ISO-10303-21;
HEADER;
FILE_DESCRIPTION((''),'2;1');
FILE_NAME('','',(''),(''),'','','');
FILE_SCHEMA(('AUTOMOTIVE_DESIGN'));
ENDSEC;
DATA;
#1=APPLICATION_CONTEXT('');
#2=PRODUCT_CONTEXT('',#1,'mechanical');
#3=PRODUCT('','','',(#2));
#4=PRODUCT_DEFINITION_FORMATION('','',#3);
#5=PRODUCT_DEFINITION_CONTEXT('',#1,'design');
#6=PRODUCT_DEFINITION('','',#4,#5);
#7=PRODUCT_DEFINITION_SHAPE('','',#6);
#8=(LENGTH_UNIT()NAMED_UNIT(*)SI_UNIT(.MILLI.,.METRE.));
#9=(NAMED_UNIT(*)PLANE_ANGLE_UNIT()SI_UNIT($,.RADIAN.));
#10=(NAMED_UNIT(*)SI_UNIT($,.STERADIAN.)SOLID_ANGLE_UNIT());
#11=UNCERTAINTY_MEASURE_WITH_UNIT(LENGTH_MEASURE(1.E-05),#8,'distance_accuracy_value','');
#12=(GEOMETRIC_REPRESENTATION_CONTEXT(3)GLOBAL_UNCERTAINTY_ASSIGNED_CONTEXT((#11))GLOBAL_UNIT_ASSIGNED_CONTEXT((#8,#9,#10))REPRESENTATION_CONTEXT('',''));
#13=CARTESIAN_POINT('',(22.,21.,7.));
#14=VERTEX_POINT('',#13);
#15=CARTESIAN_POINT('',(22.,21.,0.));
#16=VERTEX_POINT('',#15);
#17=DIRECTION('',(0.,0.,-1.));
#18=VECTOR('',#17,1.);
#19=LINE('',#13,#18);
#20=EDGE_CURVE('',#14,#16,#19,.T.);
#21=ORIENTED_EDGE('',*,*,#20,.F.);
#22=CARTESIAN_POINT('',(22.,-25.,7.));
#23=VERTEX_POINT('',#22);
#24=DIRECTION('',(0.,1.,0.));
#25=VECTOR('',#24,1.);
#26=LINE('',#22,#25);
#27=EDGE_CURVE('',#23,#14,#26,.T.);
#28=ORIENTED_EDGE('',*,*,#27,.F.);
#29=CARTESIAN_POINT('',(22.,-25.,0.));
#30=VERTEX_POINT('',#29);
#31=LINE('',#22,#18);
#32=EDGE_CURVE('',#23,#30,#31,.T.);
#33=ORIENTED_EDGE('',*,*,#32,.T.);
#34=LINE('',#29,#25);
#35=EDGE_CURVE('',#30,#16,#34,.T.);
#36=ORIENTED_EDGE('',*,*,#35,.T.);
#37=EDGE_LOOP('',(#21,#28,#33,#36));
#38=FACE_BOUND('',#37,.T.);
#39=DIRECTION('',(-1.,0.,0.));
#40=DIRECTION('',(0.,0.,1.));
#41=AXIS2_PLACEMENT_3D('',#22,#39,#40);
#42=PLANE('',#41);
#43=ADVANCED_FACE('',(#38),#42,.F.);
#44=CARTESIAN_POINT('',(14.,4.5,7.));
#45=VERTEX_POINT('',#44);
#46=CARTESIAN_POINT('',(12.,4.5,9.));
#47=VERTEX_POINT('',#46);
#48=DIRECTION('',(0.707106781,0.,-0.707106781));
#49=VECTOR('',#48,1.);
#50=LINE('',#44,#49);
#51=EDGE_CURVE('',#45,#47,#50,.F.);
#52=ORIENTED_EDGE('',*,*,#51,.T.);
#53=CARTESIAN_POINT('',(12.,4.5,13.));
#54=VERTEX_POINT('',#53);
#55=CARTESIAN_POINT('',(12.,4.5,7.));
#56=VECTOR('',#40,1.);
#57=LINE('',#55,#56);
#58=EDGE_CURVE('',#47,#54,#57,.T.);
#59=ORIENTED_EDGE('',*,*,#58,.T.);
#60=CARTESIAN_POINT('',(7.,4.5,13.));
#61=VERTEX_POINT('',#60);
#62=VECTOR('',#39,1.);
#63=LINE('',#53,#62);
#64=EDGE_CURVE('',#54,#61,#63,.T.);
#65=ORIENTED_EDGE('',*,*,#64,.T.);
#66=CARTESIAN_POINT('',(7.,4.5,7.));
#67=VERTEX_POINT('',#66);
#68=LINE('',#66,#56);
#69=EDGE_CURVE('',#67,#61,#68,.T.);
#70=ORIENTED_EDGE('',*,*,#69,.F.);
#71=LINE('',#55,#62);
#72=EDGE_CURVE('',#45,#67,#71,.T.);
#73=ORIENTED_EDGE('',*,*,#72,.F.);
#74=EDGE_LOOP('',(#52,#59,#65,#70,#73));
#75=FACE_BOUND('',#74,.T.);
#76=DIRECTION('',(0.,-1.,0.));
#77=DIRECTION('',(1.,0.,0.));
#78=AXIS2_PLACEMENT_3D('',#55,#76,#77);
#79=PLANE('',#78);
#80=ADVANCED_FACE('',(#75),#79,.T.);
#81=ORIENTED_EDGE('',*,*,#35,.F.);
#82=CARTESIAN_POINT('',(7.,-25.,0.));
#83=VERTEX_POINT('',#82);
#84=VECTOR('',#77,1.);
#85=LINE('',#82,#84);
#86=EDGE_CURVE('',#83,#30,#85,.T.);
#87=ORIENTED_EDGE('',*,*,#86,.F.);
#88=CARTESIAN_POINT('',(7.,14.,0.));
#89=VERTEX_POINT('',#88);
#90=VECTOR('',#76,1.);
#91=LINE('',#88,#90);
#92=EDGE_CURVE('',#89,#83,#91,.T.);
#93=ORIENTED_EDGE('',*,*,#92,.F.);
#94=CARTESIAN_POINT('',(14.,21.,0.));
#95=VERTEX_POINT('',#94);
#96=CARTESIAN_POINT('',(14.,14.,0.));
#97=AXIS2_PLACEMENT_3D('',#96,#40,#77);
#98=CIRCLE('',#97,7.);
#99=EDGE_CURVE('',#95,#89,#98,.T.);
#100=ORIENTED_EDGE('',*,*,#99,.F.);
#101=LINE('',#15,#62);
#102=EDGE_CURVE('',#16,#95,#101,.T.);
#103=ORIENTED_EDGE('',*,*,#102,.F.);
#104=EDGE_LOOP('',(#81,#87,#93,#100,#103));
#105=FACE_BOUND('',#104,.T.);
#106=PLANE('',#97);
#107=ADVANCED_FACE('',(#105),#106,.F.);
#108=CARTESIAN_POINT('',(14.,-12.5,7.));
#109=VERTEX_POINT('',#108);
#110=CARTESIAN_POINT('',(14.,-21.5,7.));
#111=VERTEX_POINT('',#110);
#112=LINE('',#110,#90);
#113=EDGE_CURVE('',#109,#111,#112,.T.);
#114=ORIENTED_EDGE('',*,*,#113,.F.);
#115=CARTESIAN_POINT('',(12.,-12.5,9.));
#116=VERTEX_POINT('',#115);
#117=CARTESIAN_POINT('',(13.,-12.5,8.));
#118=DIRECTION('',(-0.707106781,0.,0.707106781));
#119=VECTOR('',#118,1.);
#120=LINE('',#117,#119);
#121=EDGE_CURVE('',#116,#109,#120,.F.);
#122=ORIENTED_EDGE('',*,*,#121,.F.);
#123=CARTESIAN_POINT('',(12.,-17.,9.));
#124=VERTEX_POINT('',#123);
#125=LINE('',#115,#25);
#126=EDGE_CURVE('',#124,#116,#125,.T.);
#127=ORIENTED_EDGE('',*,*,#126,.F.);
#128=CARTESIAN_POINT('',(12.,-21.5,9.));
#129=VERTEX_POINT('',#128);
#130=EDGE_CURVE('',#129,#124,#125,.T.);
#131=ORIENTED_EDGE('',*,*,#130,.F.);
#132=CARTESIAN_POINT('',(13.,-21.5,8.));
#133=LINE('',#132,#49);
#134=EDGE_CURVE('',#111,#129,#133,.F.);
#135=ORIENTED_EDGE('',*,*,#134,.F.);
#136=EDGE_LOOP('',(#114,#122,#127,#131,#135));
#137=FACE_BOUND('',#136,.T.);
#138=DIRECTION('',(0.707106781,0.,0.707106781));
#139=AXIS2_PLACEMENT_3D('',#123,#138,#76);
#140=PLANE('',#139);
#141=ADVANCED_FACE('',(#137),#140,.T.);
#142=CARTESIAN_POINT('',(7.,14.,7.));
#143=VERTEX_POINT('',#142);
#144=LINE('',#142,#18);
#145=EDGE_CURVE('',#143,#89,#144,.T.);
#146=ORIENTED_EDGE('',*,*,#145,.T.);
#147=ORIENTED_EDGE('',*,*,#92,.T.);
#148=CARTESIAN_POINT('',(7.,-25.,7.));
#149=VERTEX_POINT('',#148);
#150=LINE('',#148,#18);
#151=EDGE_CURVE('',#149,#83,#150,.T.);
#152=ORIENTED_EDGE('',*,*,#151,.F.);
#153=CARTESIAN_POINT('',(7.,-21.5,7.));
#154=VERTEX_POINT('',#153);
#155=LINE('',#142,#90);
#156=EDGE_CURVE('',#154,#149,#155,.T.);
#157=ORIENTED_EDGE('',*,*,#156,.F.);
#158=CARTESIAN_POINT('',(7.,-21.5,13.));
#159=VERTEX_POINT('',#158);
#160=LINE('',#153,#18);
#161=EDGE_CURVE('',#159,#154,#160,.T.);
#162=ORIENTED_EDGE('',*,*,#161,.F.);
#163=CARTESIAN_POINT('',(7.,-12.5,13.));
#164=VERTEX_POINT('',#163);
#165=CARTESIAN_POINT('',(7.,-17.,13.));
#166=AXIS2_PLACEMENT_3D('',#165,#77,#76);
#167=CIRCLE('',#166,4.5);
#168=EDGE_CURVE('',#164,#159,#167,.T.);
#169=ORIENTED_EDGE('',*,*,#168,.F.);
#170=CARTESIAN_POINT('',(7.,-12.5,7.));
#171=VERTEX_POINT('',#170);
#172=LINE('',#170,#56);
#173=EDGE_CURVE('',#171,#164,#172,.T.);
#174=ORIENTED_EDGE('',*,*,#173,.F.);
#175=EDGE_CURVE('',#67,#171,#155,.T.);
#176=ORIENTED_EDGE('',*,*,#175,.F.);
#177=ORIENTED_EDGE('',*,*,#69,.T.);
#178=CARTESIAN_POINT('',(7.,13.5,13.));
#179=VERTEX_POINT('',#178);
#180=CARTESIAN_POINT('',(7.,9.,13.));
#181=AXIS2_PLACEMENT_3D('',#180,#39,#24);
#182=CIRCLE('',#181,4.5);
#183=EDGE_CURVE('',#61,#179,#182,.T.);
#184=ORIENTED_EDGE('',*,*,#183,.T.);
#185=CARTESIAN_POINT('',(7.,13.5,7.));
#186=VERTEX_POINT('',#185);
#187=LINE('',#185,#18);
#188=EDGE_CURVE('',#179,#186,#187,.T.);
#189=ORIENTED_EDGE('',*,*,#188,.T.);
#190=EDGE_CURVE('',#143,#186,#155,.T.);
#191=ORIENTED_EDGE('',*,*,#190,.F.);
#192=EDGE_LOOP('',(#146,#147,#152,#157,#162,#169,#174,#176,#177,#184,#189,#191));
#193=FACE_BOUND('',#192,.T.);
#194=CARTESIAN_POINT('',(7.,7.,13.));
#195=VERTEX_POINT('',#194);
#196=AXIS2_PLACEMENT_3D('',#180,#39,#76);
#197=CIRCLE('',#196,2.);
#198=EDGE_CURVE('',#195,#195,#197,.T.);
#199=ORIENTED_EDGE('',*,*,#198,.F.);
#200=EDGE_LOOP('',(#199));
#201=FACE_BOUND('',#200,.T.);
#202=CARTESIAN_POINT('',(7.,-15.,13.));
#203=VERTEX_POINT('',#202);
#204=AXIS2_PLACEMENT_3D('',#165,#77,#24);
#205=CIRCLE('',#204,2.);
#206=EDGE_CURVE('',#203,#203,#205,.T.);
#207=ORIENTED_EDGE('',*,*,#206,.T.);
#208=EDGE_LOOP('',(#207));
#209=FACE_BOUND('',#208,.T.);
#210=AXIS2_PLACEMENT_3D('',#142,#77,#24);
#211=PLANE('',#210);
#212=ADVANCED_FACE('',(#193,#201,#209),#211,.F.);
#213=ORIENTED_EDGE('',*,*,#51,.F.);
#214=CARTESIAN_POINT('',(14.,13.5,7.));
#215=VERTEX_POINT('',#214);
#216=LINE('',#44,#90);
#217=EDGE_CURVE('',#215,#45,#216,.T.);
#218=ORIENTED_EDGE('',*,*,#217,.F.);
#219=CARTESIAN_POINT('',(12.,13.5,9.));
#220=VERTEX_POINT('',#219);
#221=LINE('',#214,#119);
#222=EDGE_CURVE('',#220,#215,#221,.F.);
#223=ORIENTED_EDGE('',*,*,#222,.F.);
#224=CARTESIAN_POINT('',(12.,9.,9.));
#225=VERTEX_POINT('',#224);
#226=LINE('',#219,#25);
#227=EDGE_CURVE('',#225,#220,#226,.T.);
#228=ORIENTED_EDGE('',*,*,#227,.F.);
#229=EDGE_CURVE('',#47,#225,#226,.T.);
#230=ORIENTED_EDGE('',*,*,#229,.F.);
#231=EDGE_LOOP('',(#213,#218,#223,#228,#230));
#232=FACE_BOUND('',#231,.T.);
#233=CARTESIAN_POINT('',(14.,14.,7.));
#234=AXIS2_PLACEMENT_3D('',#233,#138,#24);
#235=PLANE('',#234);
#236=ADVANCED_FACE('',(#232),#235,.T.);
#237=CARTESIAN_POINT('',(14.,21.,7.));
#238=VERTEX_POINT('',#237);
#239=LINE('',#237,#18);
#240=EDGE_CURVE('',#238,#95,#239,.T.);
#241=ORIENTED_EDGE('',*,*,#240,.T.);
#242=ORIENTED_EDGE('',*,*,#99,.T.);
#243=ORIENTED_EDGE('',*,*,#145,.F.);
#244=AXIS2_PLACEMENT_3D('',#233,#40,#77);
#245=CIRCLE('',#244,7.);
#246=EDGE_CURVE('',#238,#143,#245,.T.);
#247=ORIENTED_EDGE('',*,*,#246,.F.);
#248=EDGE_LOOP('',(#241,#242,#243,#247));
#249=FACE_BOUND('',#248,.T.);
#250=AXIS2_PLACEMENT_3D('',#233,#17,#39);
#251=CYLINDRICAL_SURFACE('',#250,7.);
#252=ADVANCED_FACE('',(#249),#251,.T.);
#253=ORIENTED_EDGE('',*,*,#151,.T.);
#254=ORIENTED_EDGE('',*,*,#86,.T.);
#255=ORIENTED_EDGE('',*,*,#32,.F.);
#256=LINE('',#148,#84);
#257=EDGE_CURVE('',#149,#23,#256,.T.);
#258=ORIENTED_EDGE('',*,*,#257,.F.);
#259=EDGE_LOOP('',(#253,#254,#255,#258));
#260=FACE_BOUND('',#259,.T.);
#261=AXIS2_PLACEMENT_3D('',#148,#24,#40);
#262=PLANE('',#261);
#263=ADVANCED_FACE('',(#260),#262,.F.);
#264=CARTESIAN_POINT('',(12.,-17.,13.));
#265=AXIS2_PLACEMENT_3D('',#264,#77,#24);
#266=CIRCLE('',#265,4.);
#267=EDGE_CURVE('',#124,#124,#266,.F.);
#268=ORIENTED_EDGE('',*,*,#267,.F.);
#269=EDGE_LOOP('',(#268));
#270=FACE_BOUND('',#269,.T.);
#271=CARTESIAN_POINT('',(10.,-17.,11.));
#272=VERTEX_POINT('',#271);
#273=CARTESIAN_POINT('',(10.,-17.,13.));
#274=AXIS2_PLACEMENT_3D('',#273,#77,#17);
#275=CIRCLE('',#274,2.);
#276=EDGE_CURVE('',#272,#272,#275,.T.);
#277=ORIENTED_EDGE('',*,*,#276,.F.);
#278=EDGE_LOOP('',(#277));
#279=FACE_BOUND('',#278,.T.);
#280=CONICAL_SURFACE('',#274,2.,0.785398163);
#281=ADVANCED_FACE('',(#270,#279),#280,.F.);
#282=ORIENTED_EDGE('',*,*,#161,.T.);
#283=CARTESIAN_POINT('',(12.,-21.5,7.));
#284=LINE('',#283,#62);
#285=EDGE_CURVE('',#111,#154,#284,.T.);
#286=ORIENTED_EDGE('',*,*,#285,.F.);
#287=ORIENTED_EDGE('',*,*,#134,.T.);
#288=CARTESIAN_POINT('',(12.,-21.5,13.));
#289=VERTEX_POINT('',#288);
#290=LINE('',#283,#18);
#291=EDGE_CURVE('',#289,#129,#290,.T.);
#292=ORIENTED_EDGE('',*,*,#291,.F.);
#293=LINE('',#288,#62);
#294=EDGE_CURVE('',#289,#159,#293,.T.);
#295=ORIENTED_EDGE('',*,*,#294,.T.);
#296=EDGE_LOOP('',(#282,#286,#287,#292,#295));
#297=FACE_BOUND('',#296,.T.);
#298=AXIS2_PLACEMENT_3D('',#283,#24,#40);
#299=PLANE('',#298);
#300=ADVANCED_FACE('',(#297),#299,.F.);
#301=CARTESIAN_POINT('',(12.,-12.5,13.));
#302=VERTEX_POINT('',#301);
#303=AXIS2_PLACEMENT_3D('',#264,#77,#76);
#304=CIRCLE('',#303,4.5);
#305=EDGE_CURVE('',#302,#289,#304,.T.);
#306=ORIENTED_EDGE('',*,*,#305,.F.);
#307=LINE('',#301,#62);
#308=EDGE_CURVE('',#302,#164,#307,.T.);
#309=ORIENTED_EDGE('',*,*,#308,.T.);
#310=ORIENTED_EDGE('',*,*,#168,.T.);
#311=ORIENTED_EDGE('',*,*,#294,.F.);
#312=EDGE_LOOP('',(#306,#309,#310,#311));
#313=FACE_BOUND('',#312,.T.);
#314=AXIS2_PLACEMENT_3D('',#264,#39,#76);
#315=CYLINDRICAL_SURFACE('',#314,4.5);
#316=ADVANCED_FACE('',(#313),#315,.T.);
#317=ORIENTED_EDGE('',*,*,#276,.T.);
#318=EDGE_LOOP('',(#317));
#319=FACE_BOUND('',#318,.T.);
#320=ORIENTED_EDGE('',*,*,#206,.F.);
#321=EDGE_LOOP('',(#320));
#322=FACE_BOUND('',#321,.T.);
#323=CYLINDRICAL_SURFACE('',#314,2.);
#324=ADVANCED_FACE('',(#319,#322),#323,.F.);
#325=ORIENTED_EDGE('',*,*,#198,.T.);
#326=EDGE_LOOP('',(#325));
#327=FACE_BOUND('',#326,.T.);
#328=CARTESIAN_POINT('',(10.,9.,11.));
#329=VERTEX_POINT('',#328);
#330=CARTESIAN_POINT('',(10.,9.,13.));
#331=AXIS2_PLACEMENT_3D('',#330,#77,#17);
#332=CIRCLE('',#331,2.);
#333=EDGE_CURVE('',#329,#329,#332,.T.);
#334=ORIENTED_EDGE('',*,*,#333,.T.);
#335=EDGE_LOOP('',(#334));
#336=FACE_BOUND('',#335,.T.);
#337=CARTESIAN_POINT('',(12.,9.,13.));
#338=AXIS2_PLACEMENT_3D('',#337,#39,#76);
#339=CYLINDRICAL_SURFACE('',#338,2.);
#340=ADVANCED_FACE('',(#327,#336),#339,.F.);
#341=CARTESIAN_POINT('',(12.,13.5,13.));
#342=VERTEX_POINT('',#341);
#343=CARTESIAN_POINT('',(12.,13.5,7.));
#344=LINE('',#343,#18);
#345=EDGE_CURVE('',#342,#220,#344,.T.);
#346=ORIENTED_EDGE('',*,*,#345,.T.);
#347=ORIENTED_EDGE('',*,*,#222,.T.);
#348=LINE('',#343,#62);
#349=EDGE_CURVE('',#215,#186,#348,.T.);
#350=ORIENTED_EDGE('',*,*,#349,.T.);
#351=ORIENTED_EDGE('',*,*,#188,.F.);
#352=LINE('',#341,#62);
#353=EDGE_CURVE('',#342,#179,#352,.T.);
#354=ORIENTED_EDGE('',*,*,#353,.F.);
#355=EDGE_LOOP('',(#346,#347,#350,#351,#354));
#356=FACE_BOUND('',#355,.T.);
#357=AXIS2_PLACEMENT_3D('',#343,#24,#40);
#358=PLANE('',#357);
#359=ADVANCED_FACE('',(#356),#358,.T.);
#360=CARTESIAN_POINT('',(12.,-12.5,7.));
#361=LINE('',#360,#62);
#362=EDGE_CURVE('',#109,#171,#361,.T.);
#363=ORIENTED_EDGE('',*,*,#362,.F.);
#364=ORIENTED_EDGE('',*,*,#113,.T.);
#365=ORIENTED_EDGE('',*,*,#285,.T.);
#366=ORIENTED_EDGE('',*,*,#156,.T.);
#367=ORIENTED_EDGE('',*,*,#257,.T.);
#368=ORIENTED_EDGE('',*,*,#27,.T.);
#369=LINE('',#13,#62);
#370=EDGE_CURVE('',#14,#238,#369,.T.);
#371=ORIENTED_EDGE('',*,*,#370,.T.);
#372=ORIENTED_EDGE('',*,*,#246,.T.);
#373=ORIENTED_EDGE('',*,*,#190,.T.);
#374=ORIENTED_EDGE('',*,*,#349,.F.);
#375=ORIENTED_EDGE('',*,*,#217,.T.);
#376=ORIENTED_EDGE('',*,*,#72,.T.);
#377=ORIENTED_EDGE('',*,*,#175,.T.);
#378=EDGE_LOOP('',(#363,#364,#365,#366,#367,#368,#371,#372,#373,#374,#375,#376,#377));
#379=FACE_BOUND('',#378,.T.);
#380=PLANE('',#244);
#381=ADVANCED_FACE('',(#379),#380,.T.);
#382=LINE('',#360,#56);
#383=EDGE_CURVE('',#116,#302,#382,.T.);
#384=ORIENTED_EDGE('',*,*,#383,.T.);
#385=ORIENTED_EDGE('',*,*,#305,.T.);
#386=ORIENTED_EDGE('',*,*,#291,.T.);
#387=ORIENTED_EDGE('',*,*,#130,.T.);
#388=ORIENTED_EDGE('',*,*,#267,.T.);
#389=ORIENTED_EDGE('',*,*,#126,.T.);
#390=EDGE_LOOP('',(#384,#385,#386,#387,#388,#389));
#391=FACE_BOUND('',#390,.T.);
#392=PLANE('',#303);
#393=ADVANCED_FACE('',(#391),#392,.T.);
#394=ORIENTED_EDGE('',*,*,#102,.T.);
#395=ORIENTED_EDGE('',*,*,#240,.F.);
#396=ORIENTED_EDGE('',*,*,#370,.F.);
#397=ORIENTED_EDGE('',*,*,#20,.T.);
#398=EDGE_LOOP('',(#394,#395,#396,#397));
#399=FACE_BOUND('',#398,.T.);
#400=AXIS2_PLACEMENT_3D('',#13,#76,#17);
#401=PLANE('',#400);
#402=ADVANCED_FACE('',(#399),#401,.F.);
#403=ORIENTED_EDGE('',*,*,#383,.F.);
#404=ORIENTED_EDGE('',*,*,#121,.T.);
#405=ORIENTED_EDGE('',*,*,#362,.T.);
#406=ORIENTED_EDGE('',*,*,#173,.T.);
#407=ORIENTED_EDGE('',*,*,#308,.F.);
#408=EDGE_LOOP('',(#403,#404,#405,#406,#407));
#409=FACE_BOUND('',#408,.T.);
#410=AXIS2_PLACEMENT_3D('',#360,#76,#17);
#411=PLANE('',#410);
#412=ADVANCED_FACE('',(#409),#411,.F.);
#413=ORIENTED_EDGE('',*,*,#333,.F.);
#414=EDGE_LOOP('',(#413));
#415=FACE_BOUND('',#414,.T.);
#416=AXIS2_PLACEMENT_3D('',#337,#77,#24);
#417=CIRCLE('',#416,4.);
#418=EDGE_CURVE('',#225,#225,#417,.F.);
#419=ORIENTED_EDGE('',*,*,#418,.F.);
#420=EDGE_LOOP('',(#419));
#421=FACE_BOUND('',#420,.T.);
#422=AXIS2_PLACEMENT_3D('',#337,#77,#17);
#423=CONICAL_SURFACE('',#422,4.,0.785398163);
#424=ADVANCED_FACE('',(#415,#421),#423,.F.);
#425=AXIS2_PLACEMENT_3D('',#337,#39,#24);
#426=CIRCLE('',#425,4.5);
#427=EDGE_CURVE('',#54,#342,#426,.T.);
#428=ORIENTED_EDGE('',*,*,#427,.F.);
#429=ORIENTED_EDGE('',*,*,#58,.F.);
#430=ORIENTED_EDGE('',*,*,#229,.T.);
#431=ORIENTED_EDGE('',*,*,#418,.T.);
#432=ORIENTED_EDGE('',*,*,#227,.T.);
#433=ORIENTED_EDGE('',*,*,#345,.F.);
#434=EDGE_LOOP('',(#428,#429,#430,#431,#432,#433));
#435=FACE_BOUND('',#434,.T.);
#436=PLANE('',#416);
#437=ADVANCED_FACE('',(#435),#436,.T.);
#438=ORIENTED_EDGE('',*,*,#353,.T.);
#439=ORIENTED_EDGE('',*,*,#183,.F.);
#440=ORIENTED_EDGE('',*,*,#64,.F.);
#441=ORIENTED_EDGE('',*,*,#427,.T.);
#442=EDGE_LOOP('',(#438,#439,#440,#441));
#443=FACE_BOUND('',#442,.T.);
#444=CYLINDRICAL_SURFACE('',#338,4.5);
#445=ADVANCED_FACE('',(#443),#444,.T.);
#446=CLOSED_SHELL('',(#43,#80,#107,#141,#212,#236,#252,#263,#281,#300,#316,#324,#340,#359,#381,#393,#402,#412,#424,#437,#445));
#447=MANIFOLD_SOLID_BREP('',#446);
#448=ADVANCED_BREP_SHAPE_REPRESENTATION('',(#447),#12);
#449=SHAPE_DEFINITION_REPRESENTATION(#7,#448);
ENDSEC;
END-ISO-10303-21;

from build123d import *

# Parameters (mm, degrees)
BOSS_EXTRUDE1_DEPTH = 7
SKETCH2_R           = 2
BOSS_EXTRUDE2_DEPTH = 5
CHAMFER1_SIZE       = 2
CHAMFER2_SIZE       = 2


with BuildPart() as part:
    # Sketch1 → Boss-Extrude1 (new body)
    with BuildSketch(Plane.XY):
        with BuildLine():
            Line((22, 21), (14, 21))
            ThreePointArc((14, 21), (9.050252532, 18.949747468), (7, 14))
            Line((7, 14), (7, -25))
            Line((7, -25), (22, -25))
            Line((22, -25), (22, 21))
        make_face()
    extrude(amount=BOSS_EXTRUDE1_DEPTH)

    # Sketch2 → Boss-Extrude2 (add)
    with BuildSketch(Plane.ZY.offset(-7)):
        with BuildLine():
            Line((7, 13.5), (13, 13.5))
            ThreePointArc((13, 13.5), (17.5, 9), (13, 4.5))
            Line((13, 4.5), (7, 4.5))
            Line((7, 4.5), (7, 13.5))
        make_face()
        with Locations(Location((13, 9, 0), (0, 0, 270))):
            Circle(SKETCH2_R, mode=Mode.SUBTRACT)
    boss_extrude2 = extrude(amount=-BOSS_EXTRUDE2_DEPTH)

    # Mirror1: Boss-Extrude2 across plane
    add(boss_extrude2.mirror(Plane.ZX.offset(-4)))

    # Chamfer1
    chamfer1_edges = [part.edges().sort_by_distance(p)[0] for p in [
        (12, 11, 13),
        (12, -19, 13),
    ]]
    chamfer(chamfer1_edges, length=CHAMFER1_SIZE)

    # Chamfer2
    chamfer2_edges = [part.edges().sort_by_distance(p)[0] for p in [
        (12, 9, 7),
        (12, -17, 7),
    ]]
    chamfer(chamfer2_edges, length=CHAMFER2_SIZE - 0.0001)  # a hair under: the kernel refuses the full size


solid = part.part
